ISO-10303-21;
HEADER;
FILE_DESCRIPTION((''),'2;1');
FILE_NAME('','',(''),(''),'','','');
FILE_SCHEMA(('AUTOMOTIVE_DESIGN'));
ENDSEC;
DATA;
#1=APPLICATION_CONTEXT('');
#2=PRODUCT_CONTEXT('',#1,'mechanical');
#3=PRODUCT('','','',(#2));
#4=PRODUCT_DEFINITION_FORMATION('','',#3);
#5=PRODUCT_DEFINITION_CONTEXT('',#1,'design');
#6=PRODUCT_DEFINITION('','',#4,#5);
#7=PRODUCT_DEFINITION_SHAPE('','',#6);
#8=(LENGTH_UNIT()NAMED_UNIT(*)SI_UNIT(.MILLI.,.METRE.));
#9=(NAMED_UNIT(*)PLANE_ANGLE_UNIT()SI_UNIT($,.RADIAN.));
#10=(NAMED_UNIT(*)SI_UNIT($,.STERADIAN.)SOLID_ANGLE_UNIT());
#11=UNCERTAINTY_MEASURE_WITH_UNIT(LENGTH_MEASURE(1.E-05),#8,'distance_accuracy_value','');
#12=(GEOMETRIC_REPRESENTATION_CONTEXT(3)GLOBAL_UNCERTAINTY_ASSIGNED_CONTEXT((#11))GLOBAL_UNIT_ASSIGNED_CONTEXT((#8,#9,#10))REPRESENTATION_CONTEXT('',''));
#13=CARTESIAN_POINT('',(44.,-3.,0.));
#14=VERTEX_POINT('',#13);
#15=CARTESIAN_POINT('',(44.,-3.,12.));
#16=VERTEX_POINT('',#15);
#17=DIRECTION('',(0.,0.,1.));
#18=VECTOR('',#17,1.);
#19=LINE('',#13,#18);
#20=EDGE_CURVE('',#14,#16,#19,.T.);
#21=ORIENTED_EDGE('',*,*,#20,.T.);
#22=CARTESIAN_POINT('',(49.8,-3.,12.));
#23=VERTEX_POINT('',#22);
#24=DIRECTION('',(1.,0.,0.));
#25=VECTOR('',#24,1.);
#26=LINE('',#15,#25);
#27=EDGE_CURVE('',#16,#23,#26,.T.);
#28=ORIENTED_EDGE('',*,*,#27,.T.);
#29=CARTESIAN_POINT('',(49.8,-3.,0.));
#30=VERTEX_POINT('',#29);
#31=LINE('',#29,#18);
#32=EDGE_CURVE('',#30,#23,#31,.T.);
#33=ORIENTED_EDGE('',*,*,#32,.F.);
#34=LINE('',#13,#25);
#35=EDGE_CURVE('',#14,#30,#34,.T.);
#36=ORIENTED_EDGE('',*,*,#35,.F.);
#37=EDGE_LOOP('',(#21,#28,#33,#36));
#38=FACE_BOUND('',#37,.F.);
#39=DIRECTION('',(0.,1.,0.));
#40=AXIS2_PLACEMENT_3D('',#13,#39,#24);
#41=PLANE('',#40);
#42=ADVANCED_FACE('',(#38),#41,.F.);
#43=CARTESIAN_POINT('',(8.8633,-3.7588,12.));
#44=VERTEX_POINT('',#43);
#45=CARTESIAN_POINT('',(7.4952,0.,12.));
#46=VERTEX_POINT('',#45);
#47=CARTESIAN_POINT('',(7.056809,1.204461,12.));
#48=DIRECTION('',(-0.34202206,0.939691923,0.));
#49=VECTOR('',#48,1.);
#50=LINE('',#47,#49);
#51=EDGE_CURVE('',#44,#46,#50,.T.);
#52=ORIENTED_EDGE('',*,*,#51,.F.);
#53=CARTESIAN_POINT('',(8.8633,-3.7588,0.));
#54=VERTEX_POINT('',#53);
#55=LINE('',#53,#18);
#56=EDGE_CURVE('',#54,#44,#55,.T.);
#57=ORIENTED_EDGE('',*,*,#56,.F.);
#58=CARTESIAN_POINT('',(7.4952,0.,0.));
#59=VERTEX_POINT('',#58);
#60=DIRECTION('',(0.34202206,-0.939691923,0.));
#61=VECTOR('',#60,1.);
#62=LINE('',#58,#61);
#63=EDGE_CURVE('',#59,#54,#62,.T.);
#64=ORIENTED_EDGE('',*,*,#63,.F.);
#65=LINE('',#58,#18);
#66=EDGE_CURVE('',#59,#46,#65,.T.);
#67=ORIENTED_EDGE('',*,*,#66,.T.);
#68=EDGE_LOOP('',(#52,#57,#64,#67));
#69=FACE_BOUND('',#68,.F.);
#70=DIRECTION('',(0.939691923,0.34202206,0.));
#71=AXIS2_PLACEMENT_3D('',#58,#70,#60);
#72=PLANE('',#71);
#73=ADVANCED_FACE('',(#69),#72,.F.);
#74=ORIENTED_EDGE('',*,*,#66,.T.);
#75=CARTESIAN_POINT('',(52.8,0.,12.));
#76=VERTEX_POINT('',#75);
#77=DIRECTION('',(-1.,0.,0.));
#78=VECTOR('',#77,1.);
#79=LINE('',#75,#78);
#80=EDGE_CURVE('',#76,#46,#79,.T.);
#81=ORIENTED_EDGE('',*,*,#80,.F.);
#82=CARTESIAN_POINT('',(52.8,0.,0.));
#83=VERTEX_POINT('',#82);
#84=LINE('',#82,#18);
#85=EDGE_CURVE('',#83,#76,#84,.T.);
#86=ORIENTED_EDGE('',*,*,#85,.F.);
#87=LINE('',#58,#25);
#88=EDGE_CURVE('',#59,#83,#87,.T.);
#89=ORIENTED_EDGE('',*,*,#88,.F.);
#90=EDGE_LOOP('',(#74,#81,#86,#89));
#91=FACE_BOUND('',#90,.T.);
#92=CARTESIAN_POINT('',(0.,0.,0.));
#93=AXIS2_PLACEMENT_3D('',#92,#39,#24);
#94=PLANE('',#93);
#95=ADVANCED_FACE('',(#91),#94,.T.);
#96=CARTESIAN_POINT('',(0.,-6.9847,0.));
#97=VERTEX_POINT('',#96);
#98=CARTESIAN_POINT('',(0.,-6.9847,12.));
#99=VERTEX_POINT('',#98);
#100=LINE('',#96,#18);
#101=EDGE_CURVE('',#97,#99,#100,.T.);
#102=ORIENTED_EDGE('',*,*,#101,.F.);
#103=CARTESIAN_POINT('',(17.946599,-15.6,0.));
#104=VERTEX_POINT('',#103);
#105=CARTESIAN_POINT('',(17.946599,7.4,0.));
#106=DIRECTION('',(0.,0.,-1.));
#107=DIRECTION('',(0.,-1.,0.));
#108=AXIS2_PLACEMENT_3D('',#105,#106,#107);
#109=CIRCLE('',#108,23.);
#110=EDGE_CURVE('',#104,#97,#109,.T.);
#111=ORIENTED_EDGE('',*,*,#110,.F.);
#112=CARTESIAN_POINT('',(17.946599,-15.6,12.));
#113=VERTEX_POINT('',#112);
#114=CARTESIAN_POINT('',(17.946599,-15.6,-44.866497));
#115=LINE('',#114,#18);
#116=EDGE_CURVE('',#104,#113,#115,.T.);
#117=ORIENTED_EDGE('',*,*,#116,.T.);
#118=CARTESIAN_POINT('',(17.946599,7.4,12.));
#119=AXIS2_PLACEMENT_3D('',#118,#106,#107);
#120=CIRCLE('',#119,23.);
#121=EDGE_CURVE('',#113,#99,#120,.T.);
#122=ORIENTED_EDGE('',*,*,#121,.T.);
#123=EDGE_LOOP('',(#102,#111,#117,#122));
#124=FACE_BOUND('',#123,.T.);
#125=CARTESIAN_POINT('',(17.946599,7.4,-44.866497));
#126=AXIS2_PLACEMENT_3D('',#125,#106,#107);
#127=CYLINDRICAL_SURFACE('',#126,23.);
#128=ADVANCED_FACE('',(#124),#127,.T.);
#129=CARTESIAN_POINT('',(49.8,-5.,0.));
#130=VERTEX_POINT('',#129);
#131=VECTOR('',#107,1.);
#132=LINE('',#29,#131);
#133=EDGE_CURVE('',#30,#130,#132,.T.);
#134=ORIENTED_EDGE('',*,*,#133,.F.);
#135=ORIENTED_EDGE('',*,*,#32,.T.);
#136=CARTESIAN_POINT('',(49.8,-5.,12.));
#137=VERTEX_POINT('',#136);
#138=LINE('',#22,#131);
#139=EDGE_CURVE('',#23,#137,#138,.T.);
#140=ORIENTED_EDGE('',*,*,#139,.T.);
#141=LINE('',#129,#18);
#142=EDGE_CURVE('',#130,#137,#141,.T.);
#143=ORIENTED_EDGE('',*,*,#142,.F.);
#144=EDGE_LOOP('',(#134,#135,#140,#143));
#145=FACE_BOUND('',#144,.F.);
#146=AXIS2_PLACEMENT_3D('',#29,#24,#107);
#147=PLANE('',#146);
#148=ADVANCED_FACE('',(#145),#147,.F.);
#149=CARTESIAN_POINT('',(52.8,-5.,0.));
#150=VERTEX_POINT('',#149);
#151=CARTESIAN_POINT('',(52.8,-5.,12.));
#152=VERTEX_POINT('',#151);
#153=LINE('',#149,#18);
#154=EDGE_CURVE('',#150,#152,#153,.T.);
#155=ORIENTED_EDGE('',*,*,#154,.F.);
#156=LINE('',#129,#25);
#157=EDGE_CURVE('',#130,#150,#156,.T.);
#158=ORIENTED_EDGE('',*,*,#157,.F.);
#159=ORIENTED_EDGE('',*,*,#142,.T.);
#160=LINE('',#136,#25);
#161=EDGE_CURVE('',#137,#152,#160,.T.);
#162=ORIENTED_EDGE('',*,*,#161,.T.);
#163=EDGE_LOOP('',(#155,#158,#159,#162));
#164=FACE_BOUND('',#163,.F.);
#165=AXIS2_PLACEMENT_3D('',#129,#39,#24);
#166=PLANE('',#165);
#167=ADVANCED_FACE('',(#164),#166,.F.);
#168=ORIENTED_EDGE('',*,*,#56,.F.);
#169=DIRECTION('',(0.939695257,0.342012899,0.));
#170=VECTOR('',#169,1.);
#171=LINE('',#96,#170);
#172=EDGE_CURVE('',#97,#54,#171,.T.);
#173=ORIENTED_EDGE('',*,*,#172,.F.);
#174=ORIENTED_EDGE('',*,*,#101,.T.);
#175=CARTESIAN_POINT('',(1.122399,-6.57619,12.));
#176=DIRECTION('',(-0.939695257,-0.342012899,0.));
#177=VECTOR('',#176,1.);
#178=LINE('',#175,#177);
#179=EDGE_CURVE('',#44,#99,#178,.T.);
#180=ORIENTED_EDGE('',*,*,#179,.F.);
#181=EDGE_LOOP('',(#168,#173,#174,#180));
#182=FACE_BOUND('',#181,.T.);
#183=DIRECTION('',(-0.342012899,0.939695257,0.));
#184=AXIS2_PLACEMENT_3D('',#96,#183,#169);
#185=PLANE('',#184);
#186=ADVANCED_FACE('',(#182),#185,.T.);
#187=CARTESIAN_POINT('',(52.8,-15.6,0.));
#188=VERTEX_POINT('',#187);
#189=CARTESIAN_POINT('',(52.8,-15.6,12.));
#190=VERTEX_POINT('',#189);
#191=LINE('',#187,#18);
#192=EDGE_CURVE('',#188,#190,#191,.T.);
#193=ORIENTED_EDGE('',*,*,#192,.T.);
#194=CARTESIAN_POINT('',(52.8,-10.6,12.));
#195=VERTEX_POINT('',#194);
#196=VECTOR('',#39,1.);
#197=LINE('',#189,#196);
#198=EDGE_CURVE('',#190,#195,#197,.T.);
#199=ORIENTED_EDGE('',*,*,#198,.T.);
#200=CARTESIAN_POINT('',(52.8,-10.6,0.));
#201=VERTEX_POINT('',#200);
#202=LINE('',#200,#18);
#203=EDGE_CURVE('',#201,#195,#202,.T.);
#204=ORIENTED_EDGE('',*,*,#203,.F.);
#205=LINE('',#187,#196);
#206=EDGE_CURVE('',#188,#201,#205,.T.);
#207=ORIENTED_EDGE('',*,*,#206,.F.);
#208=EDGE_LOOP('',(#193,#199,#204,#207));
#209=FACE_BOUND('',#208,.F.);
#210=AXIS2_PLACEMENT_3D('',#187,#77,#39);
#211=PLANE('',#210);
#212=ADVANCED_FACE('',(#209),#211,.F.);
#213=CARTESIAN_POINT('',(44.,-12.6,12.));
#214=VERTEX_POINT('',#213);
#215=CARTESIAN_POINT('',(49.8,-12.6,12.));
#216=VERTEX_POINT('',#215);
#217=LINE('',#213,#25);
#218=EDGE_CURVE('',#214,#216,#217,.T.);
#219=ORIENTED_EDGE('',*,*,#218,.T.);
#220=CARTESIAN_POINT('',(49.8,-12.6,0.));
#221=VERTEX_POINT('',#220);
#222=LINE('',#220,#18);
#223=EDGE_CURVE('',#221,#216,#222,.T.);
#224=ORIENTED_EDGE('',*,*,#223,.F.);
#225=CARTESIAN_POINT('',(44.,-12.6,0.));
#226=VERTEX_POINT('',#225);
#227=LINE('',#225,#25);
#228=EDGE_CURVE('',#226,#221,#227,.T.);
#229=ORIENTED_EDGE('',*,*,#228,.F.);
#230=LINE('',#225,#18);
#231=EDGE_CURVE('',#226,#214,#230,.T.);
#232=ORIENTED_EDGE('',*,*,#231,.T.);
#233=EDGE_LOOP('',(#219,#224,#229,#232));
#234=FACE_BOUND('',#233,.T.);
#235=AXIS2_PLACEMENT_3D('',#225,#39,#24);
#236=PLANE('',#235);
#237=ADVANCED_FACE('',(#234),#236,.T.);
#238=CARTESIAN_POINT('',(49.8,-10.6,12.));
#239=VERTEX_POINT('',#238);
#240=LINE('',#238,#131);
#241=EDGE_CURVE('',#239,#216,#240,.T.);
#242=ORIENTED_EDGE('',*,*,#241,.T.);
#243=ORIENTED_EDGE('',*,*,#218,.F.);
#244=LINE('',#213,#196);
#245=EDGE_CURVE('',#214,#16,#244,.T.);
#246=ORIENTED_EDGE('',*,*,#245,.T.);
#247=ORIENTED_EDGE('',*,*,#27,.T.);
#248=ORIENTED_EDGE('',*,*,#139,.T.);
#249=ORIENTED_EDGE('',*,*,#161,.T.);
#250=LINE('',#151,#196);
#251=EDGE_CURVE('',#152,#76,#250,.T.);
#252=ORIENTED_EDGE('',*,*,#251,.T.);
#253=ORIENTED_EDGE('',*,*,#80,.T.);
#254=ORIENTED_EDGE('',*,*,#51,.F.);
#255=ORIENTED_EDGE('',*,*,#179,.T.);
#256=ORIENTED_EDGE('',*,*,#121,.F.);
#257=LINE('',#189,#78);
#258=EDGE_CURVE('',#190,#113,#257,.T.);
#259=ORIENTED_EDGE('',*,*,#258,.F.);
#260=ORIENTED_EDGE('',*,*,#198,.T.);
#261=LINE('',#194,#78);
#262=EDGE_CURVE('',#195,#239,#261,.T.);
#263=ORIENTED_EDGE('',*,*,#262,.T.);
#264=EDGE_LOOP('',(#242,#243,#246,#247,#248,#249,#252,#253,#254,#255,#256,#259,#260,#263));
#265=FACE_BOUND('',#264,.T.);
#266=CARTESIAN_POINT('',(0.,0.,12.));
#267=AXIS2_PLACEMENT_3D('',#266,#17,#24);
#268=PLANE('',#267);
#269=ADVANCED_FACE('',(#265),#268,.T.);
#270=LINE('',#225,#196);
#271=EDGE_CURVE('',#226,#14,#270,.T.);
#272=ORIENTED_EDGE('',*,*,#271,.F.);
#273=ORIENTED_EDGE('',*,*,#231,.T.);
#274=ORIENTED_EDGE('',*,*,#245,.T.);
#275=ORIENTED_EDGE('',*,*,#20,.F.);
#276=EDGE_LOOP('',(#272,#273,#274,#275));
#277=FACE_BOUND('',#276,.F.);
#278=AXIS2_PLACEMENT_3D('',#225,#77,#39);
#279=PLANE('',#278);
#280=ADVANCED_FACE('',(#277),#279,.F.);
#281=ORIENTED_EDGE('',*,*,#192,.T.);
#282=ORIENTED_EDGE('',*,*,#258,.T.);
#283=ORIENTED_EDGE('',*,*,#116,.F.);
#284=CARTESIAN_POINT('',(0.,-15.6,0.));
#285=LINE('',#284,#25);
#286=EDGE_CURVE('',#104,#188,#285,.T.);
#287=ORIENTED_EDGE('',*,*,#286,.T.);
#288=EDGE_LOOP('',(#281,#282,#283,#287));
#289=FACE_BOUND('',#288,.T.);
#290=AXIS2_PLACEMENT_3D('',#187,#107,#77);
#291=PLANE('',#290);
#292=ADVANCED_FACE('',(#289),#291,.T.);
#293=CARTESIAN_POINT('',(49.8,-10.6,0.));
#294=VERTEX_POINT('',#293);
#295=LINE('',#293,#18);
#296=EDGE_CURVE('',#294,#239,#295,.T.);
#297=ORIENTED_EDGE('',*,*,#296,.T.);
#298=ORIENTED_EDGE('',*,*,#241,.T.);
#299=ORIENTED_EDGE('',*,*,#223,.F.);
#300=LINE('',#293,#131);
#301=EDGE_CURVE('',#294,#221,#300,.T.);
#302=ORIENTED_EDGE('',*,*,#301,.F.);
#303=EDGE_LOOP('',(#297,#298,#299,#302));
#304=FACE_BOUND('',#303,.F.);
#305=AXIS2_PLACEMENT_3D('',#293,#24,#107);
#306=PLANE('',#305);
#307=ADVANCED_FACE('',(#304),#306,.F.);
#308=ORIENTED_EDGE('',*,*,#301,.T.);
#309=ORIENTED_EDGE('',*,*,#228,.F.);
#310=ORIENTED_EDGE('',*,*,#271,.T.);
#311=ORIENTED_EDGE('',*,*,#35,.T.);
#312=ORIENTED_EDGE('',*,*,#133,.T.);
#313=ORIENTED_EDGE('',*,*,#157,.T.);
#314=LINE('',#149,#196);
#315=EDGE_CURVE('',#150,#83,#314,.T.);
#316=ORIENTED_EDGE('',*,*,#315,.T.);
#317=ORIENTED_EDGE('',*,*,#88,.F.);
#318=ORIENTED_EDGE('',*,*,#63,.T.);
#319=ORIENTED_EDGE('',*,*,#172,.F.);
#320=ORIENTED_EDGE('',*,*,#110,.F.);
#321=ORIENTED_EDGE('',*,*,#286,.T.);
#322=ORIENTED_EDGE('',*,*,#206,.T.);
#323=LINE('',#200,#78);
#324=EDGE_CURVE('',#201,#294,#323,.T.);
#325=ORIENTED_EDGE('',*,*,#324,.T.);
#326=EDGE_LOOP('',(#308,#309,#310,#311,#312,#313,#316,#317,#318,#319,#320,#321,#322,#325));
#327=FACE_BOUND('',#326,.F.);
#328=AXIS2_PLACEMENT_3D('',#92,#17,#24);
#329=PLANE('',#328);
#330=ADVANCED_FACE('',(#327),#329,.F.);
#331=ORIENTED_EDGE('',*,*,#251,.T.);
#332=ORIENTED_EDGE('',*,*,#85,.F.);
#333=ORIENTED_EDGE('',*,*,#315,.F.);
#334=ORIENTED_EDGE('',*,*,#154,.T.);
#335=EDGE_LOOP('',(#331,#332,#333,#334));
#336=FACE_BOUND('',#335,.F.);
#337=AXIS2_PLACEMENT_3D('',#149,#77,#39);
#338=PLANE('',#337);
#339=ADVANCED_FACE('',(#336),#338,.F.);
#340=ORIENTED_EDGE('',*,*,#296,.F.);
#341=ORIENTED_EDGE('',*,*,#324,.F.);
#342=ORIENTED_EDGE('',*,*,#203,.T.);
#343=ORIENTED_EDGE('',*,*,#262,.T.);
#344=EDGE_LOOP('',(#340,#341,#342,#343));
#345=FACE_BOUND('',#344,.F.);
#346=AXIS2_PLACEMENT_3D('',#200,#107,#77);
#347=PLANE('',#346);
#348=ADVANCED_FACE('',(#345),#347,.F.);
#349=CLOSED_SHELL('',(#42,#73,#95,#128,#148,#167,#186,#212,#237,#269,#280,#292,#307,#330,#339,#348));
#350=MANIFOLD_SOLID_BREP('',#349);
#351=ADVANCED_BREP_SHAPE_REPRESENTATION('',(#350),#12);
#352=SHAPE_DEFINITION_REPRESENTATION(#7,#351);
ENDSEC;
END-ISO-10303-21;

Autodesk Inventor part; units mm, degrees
ref_plane "YZ Plane" through (0, 0, 0) normal (1, 0, 0) x (0, 1, 0)
ref_plane "XZ Plane" through (0, 0, 0) normal (0, 1, 0) x (-1, 0, 0)
ref_plane "XY Plane" through (0, 0, 0) normal (0, 0, 1) x (1, 0, 0)
sketch "Sketch5" plane through (0, 0, 0) normal (0, 0, 1) x (1, 0, 0)
  line L0 (52.8, -15.6) -> (52.8, -10.6)
  line L1 (52.8, -10.6) -> (49.8, -10.6)
  line L2 (49.8, -10.6) -> (49.8, -12.6)
  line L3 (44, -12.6) -> (44, -3)
  line L4 (49.8, -3) -> (49.8, -5)
  line L5 (49.8, -5) -> (52.8, -5)
  line L6 (52.8, -5) -> (52.8, 0)
  line L7 (52.8, 0) -> (7.8, 0)
  line L8 (44, -3) -> (49.8, -3)
  line L9 (44, -12.6) -> (49.8, -12.6)
  line L10 (52.8, -15.6) -> (7.8, -15.6)
  line L11 (7.8, -15.6) -> (0, -15.6)
  line L12 (0, -15.6) -> (0, 0)
  line L13 (0, 0) -> (7.8, 0)
  point P0 (7.8, 0)
  dimension "d41" = 5.8
  dimension "d48" = 44
  dimension "d50" = 3
  dimension "d63" = 45
  dimension "d71" = 0
  dimension "d87" = 5.6
  dimension "d88" = 9.6
  dimension "d97" = 15.6
extrude "Extrusion2" add sketch "Sketch5" along normal blind 12
sketch "Sketch8" plane through (0, 0, 0) normal (0, 0, -1) x (-1, 0, 0)
  line L0 (-7.4952, 0) -> (-8.8633, -3.7588)
  line L1 (0, -6.9847) -> (-8.8633, -3.7588)
  line L2 (0, 0) -> (0, -6.9847)
  line L3 (-44, -12.6) -> (-44, -3) projected
  line L4 (-52.8, 0) -> (0, 0) projected
  line L5 (-52.8, 0) -> (0, 0) projected
  line L6 (0, 0) -> (-7.4952, 0)
  dimension "d95" = 4
  dimension "d99" = 35.1367
  dimension "d100" = 110
extrude "Extrusion5" cut sketch "Sketch8" against normal through all
fillet "Fillet2" radius 23 1 edges at (0, -15.6, 6)
equation "\"l1\" = 8"
properties part number "Finray_test_8_Kerbe_10deg"
